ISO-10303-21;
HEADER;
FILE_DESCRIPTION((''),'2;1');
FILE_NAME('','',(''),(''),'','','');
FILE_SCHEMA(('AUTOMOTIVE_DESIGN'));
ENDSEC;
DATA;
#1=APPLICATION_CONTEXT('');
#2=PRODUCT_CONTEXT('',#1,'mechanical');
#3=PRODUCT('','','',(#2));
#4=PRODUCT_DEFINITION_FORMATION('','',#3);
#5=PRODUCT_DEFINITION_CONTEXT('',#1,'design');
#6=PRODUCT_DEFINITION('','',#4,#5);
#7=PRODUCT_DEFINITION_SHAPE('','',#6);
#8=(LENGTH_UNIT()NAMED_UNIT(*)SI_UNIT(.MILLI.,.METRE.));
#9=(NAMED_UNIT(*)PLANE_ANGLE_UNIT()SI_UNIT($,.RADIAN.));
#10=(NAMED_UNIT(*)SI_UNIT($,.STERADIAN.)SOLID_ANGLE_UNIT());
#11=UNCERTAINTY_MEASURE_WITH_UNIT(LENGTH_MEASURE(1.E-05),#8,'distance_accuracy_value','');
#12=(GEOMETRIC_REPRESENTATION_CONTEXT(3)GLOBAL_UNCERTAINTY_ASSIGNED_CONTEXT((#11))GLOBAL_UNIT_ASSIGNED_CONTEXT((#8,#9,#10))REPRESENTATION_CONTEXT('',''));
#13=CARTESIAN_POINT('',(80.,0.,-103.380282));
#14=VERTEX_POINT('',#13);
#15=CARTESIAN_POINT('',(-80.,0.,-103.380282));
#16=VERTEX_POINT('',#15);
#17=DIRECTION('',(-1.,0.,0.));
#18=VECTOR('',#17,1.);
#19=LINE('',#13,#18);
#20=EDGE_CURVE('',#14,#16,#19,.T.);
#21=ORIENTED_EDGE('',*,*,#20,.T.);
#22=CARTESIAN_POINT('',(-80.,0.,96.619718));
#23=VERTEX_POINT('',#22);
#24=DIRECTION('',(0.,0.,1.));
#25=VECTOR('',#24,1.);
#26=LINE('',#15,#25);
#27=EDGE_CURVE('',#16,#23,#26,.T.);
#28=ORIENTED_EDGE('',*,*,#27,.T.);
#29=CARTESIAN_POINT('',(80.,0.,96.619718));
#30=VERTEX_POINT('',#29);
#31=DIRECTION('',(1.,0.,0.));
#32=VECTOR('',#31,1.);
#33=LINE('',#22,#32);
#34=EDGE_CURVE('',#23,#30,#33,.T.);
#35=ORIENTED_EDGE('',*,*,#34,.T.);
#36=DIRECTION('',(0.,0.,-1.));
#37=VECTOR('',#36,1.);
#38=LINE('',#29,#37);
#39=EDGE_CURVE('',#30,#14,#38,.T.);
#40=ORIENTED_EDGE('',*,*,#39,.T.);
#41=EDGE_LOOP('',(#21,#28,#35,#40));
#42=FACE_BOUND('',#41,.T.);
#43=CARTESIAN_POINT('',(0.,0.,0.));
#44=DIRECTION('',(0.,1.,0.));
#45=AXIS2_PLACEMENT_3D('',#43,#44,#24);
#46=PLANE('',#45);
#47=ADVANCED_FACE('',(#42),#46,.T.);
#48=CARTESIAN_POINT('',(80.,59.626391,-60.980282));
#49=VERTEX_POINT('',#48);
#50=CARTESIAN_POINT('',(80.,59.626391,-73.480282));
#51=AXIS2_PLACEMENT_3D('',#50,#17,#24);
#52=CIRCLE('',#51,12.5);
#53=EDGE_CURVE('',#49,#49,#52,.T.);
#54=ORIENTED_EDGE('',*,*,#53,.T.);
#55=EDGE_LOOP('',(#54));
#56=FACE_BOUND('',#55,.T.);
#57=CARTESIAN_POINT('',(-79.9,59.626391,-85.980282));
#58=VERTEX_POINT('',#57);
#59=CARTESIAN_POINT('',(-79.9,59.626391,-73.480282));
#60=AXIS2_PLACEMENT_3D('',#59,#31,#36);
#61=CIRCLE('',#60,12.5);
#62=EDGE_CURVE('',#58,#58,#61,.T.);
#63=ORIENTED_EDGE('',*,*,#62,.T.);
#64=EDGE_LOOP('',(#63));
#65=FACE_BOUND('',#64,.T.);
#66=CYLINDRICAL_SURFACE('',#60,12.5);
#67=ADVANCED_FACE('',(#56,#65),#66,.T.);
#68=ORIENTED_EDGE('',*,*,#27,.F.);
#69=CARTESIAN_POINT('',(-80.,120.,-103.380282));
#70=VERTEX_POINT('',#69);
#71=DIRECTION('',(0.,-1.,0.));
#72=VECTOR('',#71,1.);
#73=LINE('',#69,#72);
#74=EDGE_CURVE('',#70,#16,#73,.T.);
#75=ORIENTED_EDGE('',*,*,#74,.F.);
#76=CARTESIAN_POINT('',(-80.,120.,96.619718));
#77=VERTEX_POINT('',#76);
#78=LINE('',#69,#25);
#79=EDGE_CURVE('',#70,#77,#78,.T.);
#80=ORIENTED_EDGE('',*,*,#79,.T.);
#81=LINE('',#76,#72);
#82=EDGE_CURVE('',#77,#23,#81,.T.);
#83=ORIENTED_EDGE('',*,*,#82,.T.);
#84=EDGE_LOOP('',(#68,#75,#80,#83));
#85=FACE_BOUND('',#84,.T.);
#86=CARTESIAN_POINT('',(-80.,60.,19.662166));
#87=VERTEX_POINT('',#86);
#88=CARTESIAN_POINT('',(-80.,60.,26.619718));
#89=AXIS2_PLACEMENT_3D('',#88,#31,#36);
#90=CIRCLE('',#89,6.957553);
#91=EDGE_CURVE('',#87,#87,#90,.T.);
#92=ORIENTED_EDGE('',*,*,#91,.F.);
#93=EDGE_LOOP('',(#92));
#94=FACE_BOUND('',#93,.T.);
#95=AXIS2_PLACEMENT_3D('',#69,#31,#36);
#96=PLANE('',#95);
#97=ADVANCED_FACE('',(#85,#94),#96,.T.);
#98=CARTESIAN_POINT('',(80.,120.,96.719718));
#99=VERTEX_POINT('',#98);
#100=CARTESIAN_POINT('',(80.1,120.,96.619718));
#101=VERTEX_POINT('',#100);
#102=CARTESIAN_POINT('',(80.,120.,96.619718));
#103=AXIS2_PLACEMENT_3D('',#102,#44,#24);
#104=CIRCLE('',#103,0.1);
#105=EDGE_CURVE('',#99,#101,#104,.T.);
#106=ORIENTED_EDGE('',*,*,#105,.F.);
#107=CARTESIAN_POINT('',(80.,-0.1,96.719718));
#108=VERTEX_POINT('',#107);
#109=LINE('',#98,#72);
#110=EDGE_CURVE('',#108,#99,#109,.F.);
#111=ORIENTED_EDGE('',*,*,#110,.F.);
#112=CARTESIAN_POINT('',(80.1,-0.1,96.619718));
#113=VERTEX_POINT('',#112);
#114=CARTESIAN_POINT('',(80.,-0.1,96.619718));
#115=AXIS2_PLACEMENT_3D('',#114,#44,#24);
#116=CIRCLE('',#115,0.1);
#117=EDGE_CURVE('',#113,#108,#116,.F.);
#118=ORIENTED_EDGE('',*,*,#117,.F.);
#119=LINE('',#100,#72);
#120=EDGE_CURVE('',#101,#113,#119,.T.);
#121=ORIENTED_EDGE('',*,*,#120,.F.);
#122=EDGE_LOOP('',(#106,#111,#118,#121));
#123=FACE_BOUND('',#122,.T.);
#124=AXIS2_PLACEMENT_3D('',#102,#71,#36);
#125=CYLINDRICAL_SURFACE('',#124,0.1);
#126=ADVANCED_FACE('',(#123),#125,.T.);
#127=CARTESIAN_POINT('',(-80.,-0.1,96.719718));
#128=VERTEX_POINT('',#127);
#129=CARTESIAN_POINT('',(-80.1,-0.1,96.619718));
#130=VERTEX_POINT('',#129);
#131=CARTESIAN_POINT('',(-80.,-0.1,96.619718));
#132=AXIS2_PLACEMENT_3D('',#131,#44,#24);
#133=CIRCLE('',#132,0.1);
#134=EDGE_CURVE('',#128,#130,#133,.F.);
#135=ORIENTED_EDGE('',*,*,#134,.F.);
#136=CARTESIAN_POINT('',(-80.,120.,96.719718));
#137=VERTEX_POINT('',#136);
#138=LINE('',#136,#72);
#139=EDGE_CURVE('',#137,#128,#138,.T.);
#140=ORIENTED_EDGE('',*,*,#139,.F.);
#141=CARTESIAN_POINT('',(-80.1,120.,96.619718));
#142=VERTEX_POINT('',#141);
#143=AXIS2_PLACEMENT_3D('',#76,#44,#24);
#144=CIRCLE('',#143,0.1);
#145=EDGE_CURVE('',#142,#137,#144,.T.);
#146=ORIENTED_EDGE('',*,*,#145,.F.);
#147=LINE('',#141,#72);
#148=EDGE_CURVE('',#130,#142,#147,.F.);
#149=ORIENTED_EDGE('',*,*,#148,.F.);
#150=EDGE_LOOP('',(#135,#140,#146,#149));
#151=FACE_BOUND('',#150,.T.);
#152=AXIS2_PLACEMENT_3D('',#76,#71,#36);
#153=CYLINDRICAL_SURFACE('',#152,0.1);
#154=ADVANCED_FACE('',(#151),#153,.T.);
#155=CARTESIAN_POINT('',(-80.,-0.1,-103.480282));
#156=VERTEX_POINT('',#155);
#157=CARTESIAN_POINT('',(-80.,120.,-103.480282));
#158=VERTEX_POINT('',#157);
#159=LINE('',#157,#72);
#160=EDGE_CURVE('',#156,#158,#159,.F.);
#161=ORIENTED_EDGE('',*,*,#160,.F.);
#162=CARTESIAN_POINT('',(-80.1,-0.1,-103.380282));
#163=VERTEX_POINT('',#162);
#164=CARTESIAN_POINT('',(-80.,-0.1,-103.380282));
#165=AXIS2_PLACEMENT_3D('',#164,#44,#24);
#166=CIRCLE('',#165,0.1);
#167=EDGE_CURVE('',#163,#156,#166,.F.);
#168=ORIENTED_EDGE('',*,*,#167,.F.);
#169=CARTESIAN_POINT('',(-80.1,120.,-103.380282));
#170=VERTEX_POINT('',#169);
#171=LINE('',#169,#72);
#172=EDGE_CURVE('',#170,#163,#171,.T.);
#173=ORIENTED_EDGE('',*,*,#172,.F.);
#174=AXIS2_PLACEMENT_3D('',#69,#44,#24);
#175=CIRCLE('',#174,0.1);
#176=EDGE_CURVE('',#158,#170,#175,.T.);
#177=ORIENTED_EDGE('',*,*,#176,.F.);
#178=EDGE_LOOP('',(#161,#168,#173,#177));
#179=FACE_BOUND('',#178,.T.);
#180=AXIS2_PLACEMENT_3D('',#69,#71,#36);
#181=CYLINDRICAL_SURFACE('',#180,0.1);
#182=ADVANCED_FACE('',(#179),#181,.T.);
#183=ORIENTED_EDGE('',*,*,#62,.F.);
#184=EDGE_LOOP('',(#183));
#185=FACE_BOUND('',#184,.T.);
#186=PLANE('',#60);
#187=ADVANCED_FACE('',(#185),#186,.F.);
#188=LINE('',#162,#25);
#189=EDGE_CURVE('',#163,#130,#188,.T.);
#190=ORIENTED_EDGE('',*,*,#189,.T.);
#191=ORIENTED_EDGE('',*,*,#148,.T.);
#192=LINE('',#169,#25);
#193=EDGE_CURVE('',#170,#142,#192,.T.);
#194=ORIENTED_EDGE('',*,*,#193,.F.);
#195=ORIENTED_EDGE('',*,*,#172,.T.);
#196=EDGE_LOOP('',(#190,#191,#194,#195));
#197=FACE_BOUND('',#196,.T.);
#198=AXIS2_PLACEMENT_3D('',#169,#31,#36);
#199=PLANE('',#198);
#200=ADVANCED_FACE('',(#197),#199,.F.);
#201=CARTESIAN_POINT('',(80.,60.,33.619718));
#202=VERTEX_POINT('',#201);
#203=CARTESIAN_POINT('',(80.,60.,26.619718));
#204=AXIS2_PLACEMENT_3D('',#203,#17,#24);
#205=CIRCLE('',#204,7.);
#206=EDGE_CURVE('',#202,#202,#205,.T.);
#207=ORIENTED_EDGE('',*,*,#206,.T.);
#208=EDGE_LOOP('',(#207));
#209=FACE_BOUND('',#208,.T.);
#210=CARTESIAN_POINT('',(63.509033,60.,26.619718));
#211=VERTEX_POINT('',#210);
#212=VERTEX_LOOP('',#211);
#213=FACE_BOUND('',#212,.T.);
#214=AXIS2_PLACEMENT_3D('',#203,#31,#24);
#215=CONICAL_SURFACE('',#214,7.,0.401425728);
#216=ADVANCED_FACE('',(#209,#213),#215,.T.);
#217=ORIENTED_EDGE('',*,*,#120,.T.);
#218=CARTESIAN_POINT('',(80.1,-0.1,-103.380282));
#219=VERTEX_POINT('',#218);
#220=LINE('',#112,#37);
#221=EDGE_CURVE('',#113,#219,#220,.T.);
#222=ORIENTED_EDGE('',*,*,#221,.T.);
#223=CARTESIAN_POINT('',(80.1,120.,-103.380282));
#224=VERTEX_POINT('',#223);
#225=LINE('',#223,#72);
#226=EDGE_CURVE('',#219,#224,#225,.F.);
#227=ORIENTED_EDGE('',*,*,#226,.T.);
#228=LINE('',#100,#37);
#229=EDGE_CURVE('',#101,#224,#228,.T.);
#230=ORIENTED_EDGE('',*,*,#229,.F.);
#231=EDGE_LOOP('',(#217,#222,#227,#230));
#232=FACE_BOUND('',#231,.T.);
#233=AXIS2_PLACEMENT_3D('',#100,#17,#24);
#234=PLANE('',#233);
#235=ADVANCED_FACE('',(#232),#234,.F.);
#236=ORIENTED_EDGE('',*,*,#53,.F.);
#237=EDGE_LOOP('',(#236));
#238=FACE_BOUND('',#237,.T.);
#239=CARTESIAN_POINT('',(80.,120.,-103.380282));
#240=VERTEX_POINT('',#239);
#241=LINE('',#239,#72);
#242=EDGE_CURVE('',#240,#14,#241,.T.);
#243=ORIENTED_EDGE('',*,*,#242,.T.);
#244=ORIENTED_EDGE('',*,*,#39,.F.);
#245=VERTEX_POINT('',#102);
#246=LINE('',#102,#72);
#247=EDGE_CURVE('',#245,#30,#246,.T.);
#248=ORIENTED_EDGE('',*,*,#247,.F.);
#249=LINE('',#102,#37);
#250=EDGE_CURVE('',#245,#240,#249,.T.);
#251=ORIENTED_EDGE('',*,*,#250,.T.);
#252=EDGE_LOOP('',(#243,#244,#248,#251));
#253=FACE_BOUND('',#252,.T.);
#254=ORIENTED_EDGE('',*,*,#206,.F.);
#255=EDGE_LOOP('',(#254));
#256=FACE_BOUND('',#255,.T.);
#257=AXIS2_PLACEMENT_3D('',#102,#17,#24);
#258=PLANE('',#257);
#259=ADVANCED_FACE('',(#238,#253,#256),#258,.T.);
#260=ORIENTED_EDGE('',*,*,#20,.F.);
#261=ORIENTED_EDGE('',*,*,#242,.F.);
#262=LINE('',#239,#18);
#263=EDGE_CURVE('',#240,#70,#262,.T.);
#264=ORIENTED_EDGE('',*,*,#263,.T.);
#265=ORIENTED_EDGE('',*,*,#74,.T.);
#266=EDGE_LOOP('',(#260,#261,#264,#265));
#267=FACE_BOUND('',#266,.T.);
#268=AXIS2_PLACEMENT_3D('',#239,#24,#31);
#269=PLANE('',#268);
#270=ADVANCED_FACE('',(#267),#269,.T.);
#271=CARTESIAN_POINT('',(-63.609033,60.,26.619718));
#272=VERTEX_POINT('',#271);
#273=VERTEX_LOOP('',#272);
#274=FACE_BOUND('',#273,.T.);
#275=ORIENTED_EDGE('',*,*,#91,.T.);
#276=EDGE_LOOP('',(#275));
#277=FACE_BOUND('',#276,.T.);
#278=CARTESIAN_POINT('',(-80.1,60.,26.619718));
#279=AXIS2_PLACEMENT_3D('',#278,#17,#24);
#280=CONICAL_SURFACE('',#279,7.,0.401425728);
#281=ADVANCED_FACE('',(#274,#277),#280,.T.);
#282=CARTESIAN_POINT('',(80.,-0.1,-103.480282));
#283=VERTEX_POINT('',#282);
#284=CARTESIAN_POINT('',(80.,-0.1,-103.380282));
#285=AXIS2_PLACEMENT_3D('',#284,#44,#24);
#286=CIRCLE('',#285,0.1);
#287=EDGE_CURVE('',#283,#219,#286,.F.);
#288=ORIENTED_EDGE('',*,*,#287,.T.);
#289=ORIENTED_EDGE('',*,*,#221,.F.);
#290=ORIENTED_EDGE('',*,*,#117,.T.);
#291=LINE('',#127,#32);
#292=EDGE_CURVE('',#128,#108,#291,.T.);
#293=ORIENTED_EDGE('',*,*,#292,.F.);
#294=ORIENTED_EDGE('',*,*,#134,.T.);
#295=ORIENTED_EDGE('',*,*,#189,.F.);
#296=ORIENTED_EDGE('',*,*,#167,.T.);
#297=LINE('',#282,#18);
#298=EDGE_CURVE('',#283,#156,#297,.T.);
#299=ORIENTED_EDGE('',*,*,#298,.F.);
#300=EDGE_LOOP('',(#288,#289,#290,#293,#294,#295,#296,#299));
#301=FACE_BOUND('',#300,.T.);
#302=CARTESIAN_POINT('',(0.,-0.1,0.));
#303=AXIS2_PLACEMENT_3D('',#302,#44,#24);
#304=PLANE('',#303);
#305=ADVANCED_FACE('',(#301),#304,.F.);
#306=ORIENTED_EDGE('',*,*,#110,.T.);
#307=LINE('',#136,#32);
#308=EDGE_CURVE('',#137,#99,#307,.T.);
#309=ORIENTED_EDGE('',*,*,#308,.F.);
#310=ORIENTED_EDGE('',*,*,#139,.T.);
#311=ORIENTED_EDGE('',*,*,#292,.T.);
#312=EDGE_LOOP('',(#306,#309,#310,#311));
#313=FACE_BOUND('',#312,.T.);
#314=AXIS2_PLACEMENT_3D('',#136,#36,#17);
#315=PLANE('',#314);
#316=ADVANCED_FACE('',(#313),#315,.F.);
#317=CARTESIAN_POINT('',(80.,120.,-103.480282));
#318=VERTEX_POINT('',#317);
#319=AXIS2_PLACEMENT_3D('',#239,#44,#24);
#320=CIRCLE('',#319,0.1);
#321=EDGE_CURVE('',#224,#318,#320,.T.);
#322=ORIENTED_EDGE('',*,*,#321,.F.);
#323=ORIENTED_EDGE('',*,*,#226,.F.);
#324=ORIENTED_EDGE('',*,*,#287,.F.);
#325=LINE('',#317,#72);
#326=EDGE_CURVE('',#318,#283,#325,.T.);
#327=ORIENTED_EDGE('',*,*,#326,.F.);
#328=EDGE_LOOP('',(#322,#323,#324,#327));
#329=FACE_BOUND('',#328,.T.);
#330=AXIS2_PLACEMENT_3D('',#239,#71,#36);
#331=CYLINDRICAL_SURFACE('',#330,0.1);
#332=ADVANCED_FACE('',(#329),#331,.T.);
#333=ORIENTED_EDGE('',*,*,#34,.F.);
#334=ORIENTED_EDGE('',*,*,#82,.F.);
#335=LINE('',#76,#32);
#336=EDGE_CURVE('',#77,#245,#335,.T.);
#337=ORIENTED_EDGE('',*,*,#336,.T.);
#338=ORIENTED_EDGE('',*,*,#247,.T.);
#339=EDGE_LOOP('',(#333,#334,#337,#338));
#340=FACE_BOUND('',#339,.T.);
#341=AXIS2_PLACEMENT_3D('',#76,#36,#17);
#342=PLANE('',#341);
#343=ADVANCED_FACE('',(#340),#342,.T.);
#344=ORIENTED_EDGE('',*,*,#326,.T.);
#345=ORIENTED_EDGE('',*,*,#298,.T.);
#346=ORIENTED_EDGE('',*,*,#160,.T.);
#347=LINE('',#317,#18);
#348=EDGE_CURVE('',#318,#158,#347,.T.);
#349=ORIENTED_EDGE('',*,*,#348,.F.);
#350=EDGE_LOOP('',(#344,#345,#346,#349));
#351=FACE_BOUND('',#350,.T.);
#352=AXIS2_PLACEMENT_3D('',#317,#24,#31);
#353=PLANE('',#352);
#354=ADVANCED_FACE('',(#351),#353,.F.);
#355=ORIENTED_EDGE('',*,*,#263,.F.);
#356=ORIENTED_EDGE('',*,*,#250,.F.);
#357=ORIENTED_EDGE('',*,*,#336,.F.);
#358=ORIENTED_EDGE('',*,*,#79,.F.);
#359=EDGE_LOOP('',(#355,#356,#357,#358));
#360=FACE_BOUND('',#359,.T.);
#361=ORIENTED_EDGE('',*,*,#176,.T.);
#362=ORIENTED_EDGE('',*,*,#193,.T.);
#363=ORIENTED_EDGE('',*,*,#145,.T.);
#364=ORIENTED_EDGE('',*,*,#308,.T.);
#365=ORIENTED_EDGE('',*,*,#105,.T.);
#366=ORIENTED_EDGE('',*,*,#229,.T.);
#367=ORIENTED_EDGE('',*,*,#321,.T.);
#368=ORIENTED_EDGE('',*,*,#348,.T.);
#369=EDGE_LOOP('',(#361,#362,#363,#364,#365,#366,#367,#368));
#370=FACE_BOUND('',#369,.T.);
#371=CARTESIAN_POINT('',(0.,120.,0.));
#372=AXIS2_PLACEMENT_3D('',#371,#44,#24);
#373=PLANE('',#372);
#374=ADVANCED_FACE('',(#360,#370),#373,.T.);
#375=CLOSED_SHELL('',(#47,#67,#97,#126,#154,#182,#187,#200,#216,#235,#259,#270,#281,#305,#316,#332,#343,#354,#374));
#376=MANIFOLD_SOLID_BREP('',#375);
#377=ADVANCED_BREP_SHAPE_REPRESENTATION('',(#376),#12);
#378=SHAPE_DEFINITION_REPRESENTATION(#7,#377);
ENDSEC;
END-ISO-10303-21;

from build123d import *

# Parameters (mm, degrees)
SKETCH1_W               = 160
SKETCH1_H               = 200
BOSS_EXTRUDE1_DEPTH     = 120
SHELL1_T                = 0.1
BOSS_EXTRUDE2_START     = -160
BOSS_EXTRUDE2_OUTLINE_R = 12.5
BOSS_EXTRUDE2_DEPTH     = 159.9
FILLET3_R               = 0.1


# Read off the part's stored shape, not the designer's step: Boss-Extrude2
with BuildPart() as part:
    # Sketch1 → Boss-Extrude1 (new body)
    with BuildSketch(Plane(origin=(0, 0, 0), x_dir=(1, 0, 0), z_dir=(0, 1, 0))):
        with Locations((0, 3.38028169)):
            Rectangle(SKETCH1_W, SKETCH1_H)
    extrude(amount=BOSS_EXTRUDE1_DEPTH)

    # Shell1
    shell1_openings = [part.faces().sort_by_distance(p)[0] for p in [
        (0, 120, -3.38028169),
    ]]
    offset(amount=SHELL1_T, openings=shell1_openings, kind=Kind.INTERSECTION)

    # Boss-Extrude2 outline → Boss-Extrude2 (add)
    with BuildSketch(Plane(origin=(80.1, 0, 0), x_dir=(0, 0, -1), z_dir=(1, 0, 0)).offset(BOSS_EXTRUDE2_START)):
        with Locations((73.48028169, 59.62639051)):
            Circle(BOSS_EXTRUDE2_OUTLINE_R)
    extrude(amount=BOSS_EXTRUDE2_DEPTH)

    # Fillet3
    fillet3_edges = [part.edges().sort_by_distance(p)[0] for p in [
        (80.1, 59.95, -103.48028169),
        (80.1, 59.95, 96.71971831),
        (-80.1, 59.95, 96.71971831),
        (-80.1, 59.95, -103.48028169),
    ]]
    fillet(fillet3_edges, radius=FILLET3_R)

    # Boss-Extrude3 cone 1 section (through the dimple's axis) → Boss-Extrude3 (revolve)
    with BuildSketch(Plane(origin=(-80.1, 60, 26.61971831), x_dir=(0, 0, 1), z_dir=(0, 1, 0))):
        Polygon((0, 0), (7, 0), (0, 16.490966561), align=None)
    revolve(axis=Axis((-80.1, 60, 26.61971831), (1, 0, 0)))

    # Boss-Extrude4 cone 1 section (through the dimple's axis) → Boss-Extrude4 (revolve)
    with BuildSketch(Plane(origin=(80, 60, 26.61971831), x_dir=(0, 0, -1), z_dir=(0, 1, 0))):
        Polygon((0, 0), (7, 0), (0, 16.490966561), align=None)
    revolve(axis=Axis((80, 60, 26.61971831), (-1, 0, 0)))


solid = part.part
